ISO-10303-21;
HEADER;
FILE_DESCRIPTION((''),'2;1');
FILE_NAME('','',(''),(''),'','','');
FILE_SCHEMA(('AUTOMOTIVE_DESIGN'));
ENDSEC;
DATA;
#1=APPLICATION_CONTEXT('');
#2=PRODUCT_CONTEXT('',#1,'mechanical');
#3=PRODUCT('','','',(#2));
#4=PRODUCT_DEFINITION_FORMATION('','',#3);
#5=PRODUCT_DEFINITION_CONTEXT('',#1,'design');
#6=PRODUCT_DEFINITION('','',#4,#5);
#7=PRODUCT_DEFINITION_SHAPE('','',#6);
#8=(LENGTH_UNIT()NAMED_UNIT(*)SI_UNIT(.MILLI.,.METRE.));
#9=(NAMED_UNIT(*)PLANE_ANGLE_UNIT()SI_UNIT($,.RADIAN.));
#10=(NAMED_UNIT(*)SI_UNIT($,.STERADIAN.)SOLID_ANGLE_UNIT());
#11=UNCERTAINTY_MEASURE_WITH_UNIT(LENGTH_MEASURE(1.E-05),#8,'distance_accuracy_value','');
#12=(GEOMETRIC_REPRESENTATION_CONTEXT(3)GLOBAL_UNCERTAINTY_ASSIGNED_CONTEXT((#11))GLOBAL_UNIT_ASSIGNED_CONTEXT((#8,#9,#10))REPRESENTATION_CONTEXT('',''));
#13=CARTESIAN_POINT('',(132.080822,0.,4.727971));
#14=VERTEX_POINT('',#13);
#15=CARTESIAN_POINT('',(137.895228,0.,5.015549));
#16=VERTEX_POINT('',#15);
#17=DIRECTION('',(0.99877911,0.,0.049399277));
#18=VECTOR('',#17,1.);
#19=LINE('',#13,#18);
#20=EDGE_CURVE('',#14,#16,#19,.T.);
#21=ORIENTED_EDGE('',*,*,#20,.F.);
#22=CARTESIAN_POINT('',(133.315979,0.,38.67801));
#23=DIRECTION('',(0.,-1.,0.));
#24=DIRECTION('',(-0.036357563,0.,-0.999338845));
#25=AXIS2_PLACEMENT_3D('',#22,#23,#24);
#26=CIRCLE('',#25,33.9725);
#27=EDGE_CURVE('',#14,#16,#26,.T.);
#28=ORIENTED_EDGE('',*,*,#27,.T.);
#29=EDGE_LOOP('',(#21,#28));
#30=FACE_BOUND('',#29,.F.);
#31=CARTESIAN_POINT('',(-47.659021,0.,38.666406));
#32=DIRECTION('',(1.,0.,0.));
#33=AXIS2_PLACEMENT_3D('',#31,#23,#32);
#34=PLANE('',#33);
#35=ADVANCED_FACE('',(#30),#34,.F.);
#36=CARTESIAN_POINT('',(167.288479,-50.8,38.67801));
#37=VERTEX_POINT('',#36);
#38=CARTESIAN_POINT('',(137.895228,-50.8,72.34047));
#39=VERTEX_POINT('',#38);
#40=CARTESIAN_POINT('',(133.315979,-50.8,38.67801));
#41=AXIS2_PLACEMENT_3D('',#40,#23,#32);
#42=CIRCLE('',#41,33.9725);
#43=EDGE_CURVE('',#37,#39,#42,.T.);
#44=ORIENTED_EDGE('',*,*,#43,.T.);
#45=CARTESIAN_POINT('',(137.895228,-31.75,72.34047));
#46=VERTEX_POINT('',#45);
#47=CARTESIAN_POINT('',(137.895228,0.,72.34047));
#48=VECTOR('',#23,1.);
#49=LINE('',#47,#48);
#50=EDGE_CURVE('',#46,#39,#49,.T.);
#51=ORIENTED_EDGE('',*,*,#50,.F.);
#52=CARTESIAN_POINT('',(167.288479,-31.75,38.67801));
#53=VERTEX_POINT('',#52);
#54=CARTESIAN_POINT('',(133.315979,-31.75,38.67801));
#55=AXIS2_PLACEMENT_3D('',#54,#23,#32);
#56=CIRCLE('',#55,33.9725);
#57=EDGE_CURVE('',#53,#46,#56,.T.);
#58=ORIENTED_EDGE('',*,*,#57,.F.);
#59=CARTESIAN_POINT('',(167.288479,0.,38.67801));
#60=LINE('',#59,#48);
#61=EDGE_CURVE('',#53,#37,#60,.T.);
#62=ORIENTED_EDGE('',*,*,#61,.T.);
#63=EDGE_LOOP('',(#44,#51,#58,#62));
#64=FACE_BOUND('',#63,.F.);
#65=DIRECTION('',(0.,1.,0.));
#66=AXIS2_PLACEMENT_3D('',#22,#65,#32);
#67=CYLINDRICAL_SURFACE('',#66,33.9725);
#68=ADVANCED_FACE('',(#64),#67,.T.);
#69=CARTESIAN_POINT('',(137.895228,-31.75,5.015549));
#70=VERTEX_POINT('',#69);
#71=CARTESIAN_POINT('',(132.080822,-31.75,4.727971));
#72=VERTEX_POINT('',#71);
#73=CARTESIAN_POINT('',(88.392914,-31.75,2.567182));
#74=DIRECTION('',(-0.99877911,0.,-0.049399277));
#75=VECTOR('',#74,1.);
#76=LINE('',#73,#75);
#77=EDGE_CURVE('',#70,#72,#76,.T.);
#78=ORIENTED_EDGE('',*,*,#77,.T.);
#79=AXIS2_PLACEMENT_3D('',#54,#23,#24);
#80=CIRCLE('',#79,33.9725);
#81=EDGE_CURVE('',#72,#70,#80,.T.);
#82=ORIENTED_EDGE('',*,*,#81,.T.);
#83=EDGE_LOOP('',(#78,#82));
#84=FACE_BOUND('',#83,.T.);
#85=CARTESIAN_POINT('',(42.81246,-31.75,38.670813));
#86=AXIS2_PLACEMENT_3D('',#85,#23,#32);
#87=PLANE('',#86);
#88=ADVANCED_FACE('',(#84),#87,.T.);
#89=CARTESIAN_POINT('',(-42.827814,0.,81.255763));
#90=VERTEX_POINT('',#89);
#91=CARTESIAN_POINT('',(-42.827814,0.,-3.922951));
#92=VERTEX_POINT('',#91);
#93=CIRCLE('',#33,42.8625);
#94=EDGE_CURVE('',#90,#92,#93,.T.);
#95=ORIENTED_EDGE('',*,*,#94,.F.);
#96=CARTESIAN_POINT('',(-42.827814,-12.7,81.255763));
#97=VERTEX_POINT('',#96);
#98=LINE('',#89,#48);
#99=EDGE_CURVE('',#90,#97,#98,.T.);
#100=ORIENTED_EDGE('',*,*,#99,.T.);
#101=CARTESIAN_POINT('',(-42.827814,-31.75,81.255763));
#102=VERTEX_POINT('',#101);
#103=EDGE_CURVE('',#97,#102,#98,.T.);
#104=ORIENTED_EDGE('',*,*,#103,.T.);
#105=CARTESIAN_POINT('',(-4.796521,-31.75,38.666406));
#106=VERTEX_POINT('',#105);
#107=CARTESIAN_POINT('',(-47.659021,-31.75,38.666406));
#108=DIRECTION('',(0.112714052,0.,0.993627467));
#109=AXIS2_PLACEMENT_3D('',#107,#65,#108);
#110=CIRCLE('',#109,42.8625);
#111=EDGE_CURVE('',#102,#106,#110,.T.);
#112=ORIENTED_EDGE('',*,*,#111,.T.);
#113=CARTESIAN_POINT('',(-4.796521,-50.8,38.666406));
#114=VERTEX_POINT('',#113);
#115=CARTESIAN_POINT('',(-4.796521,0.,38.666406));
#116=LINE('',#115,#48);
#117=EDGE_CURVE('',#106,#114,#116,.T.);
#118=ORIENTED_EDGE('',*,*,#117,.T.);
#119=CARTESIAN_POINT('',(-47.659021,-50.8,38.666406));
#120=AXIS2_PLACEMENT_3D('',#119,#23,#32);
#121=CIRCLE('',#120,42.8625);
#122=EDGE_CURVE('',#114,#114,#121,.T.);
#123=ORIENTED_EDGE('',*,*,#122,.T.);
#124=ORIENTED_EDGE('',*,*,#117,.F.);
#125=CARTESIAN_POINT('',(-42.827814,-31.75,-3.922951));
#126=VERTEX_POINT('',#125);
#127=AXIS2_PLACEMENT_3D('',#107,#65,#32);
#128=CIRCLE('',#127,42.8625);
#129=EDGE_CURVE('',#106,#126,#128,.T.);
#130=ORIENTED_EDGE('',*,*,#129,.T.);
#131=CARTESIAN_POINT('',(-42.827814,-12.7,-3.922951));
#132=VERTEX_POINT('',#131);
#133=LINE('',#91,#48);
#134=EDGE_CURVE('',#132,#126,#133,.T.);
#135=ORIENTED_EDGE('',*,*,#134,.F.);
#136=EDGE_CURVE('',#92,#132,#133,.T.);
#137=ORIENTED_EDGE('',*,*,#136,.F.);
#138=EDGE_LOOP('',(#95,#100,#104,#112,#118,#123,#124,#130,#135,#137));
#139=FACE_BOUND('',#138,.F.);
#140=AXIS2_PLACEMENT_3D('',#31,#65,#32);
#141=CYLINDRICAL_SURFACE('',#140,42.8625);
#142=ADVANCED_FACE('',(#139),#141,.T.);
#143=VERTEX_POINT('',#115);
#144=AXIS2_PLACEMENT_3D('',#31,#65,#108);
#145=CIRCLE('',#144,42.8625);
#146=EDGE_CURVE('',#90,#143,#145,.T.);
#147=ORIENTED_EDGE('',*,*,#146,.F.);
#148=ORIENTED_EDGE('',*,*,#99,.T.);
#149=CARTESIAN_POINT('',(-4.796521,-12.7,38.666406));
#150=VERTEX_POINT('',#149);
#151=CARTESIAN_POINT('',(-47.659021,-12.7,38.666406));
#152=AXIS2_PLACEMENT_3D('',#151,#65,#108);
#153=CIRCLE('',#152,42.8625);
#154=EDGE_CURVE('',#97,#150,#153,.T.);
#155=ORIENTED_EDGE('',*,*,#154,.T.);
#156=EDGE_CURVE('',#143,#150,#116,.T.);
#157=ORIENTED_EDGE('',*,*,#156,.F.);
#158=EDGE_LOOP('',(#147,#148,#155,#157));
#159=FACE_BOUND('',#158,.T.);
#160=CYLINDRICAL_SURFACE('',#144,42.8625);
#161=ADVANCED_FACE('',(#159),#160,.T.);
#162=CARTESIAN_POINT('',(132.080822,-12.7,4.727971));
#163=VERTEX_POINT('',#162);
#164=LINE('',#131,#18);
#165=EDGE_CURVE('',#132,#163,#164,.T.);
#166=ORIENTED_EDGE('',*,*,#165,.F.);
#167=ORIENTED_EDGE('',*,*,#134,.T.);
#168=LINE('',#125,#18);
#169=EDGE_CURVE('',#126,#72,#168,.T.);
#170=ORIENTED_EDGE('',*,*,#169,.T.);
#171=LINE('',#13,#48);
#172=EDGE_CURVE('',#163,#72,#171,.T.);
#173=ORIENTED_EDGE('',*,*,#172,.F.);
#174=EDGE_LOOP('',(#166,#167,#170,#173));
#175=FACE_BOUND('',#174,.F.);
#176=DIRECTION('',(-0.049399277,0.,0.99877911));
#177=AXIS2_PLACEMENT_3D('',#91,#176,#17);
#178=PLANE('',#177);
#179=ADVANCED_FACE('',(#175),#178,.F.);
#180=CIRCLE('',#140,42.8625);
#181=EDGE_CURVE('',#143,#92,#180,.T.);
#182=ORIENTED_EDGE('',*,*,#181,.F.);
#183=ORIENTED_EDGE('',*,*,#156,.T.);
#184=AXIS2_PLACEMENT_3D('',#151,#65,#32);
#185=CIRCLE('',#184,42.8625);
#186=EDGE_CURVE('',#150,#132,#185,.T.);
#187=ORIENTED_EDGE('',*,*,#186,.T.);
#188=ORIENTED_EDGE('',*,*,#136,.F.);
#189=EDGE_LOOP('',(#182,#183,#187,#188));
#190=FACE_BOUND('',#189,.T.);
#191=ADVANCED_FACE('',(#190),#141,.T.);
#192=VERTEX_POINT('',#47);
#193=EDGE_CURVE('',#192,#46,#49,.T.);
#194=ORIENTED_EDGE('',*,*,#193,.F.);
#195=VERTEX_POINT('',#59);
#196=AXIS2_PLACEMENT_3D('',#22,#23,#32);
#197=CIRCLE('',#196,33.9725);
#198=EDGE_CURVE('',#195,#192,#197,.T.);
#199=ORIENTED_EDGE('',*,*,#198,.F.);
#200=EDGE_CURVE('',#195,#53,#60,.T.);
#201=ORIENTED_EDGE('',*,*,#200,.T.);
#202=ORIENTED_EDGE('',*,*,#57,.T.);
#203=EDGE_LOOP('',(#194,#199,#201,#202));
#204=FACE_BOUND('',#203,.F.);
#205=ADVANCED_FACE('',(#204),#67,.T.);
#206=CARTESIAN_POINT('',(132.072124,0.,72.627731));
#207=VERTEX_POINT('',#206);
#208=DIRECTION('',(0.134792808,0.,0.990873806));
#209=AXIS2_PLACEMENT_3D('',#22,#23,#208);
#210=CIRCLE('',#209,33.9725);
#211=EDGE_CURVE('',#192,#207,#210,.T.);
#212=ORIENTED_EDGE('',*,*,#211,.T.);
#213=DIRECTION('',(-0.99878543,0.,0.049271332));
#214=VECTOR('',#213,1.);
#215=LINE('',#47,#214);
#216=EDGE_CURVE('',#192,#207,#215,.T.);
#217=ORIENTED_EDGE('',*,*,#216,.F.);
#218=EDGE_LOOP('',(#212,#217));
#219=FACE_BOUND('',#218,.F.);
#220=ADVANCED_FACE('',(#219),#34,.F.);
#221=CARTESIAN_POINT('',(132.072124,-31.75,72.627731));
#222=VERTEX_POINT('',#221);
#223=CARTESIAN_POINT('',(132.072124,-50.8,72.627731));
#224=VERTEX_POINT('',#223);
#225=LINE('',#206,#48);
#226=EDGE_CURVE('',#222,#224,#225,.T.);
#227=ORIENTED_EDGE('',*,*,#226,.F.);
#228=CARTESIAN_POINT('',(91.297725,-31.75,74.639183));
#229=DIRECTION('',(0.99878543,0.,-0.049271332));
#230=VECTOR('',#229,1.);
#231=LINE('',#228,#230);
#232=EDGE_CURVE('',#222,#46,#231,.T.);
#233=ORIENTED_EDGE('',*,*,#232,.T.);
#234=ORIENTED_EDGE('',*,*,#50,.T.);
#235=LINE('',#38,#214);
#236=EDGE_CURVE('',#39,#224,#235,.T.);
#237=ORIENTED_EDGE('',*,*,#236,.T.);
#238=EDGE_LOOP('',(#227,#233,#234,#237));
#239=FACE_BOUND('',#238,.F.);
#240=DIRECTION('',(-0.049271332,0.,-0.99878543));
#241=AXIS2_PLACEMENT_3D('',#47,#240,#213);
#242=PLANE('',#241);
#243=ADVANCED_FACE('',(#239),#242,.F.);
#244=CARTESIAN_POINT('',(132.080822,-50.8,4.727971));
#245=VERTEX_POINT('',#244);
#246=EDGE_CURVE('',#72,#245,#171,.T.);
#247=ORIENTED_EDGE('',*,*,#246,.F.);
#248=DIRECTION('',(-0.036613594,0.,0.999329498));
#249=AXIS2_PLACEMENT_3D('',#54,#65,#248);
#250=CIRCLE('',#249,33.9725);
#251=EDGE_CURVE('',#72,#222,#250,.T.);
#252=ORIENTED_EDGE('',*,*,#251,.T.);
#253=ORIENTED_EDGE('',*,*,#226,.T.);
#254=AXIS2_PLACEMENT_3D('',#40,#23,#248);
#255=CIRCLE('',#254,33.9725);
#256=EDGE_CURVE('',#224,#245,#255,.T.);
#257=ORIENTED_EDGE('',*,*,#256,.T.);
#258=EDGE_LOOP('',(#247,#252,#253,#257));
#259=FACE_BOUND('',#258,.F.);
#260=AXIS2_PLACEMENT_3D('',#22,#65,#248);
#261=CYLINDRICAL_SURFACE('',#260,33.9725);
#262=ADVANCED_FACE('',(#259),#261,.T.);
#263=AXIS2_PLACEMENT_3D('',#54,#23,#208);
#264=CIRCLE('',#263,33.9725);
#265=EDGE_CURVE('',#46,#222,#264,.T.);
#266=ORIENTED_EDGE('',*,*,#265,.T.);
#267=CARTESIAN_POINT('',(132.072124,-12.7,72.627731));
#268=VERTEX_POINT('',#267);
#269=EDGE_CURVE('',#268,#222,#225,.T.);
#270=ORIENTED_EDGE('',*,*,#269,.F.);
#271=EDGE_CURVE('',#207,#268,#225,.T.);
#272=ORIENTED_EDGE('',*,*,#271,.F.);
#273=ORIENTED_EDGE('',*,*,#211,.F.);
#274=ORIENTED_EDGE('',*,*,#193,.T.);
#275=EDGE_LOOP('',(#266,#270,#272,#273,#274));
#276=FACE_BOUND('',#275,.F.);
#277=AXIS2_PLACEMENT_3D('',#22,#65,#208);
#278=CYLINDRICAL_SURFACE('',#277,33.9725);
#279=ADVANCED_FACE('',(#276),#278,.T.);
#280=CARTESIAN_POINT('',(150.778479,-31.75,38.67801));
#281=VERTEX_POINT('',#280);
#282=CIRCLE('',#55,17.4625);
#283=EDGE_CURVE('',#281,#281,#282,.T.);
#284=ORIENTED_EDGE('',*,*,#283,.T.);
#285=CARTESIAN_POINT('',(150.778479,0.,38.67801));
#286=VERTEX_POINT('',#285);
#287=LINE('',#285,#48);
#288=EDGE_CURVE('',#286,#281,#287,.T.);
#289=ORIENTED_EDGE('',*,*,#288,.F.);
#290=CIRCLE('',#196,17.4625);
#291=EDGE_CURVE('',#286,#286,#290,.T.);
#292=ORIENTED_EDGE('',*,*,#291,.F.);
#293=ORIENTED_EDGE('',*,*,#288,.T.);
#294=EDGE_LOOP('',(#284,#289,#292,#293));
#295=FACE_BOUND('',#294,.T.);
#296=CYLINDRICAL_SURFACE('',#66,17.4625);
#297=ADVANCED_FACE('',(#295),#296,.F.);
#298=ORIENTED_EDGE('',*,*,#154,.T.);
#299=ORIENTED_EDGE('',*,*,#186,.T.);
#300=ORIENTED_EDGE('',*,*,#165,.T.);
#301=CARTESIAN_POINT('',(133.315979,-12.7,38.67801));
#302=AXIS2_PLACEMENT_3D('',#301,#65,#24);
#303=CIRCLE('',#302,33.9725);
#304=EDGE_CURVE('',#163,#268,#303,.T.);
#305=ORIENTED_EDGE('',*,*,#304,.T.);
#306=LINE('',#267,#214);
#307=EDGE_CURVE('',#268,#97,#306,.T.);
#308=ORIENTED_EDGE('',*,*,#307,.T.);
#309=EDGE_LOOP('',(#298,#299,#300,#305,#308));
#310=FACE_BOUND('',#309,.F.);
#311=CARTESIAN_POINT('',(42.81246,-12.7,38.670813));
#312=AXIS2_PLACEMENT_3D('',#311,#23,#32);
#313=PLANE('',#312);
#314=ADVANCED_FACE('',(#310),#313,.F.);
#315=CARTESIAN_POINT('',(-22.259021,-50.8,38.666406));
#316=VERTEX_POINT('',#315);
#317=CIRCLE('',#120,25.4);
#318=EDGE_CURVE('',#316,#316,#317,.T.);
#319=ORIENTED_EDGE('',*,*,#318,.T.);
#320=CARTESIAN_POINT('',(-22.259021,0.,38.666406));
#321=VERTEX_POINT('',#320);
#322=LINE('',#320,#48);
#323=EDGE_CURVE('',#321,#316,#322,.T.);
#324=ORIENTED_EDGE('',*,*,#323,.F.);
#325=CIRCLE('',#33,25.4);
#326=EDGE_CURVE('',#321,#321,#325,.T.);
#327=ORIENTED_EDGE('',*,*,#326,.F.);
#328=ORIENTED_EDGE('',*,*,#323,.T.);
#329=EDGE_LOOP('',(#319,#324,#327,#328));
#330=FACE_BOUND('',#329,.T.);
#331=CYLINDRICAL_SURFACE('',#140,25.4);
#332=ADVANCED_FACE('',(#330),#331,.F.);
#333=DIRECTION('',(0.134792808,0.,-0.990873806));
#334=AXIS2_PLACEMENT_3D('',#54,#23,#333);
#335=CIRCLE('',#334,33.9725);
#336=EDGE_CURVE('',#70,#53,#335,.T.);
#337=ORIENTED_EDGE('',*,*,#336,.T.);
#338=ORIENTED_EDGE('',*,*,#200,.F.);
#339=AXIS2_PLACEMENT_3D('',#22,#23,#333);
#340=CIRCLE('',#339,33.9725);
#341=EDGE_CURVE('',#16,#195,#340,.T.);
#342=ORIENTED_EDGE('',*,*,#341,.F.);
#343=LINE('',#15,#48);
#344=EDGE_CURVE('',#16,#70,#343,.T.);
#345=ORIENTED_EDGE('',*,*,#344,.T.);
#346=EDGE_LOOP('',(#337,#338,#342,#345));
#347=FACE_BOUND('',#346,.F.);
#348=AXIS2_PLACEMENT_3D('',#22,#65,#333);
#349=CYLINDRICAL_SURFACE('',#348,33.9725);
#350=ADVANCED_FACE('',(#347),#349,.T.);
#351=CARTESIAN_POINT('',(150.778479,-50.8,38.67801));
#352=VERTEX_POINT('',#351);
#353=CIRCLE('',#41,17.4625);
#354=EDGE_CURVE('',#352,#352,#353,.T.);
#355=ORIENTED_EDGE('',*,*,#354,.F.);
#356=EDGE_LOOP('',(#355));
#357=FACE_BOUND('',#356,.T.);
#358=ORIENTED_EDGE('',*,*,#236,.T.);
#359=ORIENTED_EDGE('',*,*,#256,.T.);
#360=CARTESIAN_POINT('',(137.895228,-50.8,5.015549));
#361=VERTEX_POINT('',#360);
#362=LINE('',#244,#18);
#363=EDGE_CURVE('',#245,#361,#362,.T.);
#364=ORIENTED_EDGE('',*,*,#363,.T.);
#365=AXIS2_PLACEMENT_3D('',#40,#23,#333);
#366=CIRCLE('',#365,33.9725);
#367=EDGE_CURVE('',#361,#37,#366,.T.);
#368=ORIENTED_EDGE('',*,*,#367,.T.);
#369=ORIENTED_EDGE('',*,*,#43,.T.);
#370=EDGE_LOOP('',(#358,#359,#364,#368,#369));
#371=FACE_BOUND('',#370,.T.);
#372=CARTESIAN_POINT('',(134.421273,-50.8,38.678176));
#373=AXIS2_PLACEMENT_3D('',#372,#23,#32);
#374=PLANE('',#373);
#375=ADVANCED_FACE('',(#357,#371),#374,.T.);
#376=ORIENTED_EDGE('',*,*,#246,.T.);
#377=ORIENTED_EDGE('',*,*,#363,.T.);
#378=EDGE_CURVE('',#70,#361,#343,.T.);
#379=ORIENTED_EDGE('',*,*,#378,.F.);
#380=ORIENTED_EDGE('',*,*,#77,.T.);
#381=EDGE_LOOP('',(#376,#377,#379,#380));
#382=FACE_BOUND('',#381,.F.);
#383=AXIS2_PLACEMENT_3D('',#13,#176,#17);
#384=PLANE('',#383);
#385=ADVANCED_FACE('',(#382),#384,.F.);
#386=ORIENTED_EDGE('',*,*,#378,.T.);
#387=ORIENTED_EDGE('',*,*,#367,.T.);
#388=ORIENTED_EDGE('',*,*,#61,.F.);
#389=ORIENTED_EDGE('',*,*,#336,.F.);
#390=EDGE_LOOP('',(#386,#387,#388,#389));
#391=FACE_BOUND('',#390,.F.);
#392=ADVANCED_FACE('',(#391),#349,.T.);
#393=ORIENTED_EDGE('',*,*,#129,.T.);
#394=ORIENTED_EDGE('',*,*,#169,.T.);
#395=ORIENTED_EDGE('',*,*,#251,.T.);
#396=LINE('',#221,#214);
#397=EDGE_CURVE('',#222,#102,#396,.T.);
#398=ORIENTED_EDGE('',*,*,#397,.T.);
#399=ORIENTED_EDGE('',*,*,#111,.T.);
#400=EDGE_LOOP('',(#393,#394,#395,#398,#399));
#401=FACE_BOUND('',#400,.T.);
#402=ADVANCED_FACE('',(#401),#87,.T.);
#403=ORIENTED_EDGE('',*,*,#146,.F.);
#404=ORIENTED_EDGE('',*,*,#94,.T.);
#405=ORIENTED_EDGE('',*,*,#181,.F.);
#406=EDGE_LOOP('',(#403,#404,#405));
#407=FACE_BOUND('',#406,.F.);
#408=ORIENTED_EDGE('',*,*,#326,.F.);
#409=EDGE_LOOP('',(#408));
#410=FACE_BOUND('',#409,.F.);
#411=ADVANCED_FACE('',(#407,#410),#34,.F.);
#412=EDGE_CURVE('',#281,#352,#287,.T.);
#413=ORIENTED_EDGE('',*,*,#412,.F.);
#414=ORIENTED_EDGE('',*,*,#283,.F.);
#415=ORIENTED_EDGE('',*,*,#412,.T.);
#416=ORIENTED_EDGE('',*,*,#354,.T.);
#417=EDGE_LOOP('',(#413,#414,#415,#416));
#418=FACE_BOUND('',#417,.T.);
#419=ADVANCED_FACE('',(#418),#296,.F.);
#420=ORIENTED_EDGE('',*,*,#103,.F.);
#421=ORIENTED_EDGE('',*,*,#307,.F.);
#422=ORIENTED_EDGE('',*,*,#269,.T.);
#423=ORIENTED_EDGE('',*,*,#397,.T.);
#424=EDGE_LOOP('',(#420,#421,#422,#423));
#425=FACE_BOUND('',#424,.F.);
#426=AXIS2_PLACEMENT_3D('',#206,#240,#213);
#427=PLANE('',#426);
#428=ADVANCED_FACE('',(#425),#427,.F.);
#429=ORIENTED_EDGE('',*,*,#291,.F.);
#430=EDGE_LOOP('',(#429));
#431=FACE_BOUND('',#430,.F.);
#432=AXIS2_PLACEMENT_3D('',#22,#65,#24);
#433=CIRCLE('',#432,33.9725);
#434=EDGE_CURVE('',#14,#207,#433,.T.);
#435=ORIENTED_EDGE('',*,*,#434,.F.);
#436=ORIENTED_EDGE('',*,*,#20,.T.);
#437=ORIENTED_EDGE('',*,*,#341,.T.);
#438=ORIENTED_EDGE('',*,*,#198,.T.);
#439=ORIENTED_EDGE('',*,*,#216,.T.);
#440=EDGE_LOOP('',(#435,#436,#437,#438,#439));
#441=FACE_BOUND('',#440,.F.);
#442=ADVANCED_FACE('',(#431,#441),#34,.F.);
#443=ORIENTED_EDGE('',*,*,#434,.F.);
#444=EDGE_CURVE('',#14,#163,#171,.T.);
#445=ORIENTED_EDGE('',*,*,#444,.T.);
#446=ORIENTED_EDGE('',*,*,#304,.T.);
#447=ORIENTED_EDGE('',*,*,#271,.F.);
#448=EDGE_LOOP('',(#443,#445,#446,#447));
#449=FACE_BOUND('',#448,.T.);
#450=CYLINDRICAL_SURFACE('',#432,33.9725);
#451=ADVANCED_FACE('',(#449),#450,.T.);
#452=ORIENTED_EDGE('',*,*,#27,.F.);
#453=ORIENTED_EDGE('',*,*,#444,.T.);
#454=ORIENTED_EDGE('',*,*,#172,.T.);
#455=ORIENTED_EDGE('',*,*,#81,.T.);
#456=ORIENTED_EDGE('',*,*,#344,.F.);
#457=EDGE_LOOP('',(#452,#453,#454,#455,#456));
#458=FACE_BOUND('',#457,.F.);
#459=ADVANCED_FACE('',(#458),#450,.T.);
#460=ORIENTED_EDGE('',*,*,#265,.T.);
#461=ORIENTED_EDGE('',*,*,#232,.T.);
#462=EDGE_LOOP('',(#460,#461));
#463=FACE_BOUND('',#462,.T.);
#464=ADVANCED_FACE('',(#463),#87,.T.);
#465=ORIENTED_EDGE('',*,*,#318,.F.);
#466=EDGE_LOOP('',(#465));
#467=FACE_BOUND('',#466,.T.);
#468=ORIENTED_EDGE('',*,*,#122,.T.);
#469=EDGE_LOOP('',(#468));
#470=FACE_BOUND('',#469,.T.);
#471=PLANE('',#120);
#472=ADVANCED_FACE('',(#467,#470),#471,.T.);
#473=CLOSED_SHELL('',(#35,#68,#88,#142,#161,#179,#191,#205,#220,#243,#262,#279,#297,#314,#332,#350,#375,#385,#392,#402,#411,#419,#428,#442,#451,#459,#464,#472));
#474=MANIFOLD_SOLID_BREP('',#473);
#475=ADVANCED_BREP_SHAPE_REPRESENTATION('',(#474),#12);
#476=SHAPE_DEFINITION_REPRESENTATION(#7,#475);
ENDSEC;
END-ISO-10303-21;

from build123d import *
from build123d import SkipClean  # not in build123d's __all__

# Parameters (mm, degrees)
F0_R     = 17.4625
F1_DEPTH = 31.75
F2_DEPTH = 31.75
F0_R_2   = 25.4
F3_DEPTH = 50.8
F4_DEPTH = 12.7
F5_DEPTH = 50.8


with BuildPart() as f1:
    # F0 (on Front) → F1 (new body)
    with BuildSketch(Plane.XZ):
        with BuildLine():
            ThreePointArc((137.8952277792, 72.3404701197), (134.9898494581, 72.609247784), (132.0721238048, 72.6277311095))
            Line((132.0721238048, 72.6277311095), (137.8952277792, 72.3404701197))
        make_face()
        with BuildLine():
            Line((137.8952277792, 5.0155493856), (132.0808217973, 4.7279708331))
            ThreePointArc((132.0808217973, 4.7279708331), (134.9941960526, 4.7469864233), (137.8952277792, 5.0155493856))
        make_face()
        with BuildLine():
            Line((137.8952277792, 72.3404701197), (132.0721238048, 72.6277311095))
            ThreePointArc((132.0721238048, 72.6277311095), (99.3434793984, 38.6736578588), (132.0808217973, 4.7279708331))
            Line((132.0808217973, 4.7279708331), (137.8952277792, 5.0155493856))
            ThreePointArc((137.8952277792, 5.0155493856), (158.9060092226, 16.333410504), (167.2884791197, 38.6780097526))
            ThreePointArc((167.2884791197, 38.6780097526), (158.9060092226, 61.0226090013), (137.8952277792, 72.3404701197))
        make_face()
        with Locations((133.3159791197, 38.6780097526)):
            Circle(F0_R, mode=Mode.SUBTRACT)
    extrude(amount=F1_DEPTH)

    # F0 (on Front) → F2 (join)
    with BuildSketch(Plane.XZ):
        with BuildLine():
            ThreePointArc((-42.8278144375, 81.2557634421), (-15.6881628684, 67.2156297522), (-4.7965205083, 38.6664061547))
            ThreePointArc((-4.7965205083, 38.6664061547), (-15.6881628684, 10.1171825573), (-42.8278144375, -3.9229511326))
            Line((-42.8278144375, -3.9229511326), (132.0808217973, 4.7279708331))
            ThreePointArc((132.0808217973, 4.7279708331), (99.3434793984, 38.6736578588), (132.0721238048, 72.6277311095))
            Line((132.0721238048, 72.6277311095), (-42.8278144375, 81.2557634421))
        make_face()
    extrude(amount=F2_DEPTH)

    # F0 (on Front) → F3 (join)
    with BuildSketch(Plane.XZ):
        with BuildLine():
            ThreePointArc((-42.8278144375, -3.9229511326), (-15.6881628684, 10.1171825573), (-4.7965205083, 38.6664061547))
            ThreePointArc((-4.7965205083, 38.6664061547), (-15.6881628684, 67.2156297522), (-42.8278144375, 81.2557634421))
            ThreePointArc((-42.8278144375, 81.2557634421), (-90.5215205083, 38.6664061547), (-42.8278144375, -3.9229511326))
        make_face()
        with Locations((-47.6590205083, 38.6664061547)):
            Circle(F0_R_2, mode=Mode.SUBTRACT)
    extrude(amount=F3_DEPTH)

    # F0 (on Front) → F4 (cut)
    with BuildSketch(Plane.XZ):
        with BuildLine():
            ThreePointArc((-42.8278144375, 81.2557634421), (-15.6881628684, 67.2156297522), (-4.7965205083, 38.6664061547))
            ThreePointArc((-4.7965205083, 38.6664061547), (-15.6881628684, 10.1171825573), (-42.8278144375, -3.9229511326))
            Line((-42.8278144375, -3.9229511326), (132.0808217973, 4.7279708331))
            ThreePointArc((132.0808217973, 4.7279708331), (99.3434793984, 38.6736578588), (132.0721238048, 72.6277311095))
            Line((132.0721238048, 72.6277311095), (-42.8278144375, 81.2557634421))
        make_face()
    with SkipClean():  # cleaning this boolean's faces spoils the solid; the shape is the same uncleaned
        extrude(amount=F4_DEPTH, mode=Mode.SUBTRACT)

    # F0 (on Front) → F5 (join)
    with BuildSketch(Plane.XZ):
        with BuildLine():
            Line((137.8952277792, 72.3404701197), (132.0721238048, 72.6277311095))
            ThreePointArc((132.0721238048, 72.6277311095), (99.3434793984, 38.6736578588), (132.0808217973, 4.7279708331))
            Line((132.0808217973, 4.7279708331), (137.8952277792, 5.0155493856))
            ThreePointArc((137.8952277792, 5.0155493856), (158.9060092226, 16.333410504), (167.2884791197, 38.6780097526))
            ThreePointArc((167.2884791197, 38.6780097526), (158.9060092226, 61.0226090013), (137.8952277792, 72.3404701197))
        make_face()
        with Locations((133.3159791197, 38.6780097526)):
            Circle(F0_R, mode=Mode.SUBTRACT)
    with SkipClean():  # cleaning this boolean's faces spoils the solid; the shape is the same uncleaned
        extrude(amount=F5_DEPTH)


solid = f1.part
